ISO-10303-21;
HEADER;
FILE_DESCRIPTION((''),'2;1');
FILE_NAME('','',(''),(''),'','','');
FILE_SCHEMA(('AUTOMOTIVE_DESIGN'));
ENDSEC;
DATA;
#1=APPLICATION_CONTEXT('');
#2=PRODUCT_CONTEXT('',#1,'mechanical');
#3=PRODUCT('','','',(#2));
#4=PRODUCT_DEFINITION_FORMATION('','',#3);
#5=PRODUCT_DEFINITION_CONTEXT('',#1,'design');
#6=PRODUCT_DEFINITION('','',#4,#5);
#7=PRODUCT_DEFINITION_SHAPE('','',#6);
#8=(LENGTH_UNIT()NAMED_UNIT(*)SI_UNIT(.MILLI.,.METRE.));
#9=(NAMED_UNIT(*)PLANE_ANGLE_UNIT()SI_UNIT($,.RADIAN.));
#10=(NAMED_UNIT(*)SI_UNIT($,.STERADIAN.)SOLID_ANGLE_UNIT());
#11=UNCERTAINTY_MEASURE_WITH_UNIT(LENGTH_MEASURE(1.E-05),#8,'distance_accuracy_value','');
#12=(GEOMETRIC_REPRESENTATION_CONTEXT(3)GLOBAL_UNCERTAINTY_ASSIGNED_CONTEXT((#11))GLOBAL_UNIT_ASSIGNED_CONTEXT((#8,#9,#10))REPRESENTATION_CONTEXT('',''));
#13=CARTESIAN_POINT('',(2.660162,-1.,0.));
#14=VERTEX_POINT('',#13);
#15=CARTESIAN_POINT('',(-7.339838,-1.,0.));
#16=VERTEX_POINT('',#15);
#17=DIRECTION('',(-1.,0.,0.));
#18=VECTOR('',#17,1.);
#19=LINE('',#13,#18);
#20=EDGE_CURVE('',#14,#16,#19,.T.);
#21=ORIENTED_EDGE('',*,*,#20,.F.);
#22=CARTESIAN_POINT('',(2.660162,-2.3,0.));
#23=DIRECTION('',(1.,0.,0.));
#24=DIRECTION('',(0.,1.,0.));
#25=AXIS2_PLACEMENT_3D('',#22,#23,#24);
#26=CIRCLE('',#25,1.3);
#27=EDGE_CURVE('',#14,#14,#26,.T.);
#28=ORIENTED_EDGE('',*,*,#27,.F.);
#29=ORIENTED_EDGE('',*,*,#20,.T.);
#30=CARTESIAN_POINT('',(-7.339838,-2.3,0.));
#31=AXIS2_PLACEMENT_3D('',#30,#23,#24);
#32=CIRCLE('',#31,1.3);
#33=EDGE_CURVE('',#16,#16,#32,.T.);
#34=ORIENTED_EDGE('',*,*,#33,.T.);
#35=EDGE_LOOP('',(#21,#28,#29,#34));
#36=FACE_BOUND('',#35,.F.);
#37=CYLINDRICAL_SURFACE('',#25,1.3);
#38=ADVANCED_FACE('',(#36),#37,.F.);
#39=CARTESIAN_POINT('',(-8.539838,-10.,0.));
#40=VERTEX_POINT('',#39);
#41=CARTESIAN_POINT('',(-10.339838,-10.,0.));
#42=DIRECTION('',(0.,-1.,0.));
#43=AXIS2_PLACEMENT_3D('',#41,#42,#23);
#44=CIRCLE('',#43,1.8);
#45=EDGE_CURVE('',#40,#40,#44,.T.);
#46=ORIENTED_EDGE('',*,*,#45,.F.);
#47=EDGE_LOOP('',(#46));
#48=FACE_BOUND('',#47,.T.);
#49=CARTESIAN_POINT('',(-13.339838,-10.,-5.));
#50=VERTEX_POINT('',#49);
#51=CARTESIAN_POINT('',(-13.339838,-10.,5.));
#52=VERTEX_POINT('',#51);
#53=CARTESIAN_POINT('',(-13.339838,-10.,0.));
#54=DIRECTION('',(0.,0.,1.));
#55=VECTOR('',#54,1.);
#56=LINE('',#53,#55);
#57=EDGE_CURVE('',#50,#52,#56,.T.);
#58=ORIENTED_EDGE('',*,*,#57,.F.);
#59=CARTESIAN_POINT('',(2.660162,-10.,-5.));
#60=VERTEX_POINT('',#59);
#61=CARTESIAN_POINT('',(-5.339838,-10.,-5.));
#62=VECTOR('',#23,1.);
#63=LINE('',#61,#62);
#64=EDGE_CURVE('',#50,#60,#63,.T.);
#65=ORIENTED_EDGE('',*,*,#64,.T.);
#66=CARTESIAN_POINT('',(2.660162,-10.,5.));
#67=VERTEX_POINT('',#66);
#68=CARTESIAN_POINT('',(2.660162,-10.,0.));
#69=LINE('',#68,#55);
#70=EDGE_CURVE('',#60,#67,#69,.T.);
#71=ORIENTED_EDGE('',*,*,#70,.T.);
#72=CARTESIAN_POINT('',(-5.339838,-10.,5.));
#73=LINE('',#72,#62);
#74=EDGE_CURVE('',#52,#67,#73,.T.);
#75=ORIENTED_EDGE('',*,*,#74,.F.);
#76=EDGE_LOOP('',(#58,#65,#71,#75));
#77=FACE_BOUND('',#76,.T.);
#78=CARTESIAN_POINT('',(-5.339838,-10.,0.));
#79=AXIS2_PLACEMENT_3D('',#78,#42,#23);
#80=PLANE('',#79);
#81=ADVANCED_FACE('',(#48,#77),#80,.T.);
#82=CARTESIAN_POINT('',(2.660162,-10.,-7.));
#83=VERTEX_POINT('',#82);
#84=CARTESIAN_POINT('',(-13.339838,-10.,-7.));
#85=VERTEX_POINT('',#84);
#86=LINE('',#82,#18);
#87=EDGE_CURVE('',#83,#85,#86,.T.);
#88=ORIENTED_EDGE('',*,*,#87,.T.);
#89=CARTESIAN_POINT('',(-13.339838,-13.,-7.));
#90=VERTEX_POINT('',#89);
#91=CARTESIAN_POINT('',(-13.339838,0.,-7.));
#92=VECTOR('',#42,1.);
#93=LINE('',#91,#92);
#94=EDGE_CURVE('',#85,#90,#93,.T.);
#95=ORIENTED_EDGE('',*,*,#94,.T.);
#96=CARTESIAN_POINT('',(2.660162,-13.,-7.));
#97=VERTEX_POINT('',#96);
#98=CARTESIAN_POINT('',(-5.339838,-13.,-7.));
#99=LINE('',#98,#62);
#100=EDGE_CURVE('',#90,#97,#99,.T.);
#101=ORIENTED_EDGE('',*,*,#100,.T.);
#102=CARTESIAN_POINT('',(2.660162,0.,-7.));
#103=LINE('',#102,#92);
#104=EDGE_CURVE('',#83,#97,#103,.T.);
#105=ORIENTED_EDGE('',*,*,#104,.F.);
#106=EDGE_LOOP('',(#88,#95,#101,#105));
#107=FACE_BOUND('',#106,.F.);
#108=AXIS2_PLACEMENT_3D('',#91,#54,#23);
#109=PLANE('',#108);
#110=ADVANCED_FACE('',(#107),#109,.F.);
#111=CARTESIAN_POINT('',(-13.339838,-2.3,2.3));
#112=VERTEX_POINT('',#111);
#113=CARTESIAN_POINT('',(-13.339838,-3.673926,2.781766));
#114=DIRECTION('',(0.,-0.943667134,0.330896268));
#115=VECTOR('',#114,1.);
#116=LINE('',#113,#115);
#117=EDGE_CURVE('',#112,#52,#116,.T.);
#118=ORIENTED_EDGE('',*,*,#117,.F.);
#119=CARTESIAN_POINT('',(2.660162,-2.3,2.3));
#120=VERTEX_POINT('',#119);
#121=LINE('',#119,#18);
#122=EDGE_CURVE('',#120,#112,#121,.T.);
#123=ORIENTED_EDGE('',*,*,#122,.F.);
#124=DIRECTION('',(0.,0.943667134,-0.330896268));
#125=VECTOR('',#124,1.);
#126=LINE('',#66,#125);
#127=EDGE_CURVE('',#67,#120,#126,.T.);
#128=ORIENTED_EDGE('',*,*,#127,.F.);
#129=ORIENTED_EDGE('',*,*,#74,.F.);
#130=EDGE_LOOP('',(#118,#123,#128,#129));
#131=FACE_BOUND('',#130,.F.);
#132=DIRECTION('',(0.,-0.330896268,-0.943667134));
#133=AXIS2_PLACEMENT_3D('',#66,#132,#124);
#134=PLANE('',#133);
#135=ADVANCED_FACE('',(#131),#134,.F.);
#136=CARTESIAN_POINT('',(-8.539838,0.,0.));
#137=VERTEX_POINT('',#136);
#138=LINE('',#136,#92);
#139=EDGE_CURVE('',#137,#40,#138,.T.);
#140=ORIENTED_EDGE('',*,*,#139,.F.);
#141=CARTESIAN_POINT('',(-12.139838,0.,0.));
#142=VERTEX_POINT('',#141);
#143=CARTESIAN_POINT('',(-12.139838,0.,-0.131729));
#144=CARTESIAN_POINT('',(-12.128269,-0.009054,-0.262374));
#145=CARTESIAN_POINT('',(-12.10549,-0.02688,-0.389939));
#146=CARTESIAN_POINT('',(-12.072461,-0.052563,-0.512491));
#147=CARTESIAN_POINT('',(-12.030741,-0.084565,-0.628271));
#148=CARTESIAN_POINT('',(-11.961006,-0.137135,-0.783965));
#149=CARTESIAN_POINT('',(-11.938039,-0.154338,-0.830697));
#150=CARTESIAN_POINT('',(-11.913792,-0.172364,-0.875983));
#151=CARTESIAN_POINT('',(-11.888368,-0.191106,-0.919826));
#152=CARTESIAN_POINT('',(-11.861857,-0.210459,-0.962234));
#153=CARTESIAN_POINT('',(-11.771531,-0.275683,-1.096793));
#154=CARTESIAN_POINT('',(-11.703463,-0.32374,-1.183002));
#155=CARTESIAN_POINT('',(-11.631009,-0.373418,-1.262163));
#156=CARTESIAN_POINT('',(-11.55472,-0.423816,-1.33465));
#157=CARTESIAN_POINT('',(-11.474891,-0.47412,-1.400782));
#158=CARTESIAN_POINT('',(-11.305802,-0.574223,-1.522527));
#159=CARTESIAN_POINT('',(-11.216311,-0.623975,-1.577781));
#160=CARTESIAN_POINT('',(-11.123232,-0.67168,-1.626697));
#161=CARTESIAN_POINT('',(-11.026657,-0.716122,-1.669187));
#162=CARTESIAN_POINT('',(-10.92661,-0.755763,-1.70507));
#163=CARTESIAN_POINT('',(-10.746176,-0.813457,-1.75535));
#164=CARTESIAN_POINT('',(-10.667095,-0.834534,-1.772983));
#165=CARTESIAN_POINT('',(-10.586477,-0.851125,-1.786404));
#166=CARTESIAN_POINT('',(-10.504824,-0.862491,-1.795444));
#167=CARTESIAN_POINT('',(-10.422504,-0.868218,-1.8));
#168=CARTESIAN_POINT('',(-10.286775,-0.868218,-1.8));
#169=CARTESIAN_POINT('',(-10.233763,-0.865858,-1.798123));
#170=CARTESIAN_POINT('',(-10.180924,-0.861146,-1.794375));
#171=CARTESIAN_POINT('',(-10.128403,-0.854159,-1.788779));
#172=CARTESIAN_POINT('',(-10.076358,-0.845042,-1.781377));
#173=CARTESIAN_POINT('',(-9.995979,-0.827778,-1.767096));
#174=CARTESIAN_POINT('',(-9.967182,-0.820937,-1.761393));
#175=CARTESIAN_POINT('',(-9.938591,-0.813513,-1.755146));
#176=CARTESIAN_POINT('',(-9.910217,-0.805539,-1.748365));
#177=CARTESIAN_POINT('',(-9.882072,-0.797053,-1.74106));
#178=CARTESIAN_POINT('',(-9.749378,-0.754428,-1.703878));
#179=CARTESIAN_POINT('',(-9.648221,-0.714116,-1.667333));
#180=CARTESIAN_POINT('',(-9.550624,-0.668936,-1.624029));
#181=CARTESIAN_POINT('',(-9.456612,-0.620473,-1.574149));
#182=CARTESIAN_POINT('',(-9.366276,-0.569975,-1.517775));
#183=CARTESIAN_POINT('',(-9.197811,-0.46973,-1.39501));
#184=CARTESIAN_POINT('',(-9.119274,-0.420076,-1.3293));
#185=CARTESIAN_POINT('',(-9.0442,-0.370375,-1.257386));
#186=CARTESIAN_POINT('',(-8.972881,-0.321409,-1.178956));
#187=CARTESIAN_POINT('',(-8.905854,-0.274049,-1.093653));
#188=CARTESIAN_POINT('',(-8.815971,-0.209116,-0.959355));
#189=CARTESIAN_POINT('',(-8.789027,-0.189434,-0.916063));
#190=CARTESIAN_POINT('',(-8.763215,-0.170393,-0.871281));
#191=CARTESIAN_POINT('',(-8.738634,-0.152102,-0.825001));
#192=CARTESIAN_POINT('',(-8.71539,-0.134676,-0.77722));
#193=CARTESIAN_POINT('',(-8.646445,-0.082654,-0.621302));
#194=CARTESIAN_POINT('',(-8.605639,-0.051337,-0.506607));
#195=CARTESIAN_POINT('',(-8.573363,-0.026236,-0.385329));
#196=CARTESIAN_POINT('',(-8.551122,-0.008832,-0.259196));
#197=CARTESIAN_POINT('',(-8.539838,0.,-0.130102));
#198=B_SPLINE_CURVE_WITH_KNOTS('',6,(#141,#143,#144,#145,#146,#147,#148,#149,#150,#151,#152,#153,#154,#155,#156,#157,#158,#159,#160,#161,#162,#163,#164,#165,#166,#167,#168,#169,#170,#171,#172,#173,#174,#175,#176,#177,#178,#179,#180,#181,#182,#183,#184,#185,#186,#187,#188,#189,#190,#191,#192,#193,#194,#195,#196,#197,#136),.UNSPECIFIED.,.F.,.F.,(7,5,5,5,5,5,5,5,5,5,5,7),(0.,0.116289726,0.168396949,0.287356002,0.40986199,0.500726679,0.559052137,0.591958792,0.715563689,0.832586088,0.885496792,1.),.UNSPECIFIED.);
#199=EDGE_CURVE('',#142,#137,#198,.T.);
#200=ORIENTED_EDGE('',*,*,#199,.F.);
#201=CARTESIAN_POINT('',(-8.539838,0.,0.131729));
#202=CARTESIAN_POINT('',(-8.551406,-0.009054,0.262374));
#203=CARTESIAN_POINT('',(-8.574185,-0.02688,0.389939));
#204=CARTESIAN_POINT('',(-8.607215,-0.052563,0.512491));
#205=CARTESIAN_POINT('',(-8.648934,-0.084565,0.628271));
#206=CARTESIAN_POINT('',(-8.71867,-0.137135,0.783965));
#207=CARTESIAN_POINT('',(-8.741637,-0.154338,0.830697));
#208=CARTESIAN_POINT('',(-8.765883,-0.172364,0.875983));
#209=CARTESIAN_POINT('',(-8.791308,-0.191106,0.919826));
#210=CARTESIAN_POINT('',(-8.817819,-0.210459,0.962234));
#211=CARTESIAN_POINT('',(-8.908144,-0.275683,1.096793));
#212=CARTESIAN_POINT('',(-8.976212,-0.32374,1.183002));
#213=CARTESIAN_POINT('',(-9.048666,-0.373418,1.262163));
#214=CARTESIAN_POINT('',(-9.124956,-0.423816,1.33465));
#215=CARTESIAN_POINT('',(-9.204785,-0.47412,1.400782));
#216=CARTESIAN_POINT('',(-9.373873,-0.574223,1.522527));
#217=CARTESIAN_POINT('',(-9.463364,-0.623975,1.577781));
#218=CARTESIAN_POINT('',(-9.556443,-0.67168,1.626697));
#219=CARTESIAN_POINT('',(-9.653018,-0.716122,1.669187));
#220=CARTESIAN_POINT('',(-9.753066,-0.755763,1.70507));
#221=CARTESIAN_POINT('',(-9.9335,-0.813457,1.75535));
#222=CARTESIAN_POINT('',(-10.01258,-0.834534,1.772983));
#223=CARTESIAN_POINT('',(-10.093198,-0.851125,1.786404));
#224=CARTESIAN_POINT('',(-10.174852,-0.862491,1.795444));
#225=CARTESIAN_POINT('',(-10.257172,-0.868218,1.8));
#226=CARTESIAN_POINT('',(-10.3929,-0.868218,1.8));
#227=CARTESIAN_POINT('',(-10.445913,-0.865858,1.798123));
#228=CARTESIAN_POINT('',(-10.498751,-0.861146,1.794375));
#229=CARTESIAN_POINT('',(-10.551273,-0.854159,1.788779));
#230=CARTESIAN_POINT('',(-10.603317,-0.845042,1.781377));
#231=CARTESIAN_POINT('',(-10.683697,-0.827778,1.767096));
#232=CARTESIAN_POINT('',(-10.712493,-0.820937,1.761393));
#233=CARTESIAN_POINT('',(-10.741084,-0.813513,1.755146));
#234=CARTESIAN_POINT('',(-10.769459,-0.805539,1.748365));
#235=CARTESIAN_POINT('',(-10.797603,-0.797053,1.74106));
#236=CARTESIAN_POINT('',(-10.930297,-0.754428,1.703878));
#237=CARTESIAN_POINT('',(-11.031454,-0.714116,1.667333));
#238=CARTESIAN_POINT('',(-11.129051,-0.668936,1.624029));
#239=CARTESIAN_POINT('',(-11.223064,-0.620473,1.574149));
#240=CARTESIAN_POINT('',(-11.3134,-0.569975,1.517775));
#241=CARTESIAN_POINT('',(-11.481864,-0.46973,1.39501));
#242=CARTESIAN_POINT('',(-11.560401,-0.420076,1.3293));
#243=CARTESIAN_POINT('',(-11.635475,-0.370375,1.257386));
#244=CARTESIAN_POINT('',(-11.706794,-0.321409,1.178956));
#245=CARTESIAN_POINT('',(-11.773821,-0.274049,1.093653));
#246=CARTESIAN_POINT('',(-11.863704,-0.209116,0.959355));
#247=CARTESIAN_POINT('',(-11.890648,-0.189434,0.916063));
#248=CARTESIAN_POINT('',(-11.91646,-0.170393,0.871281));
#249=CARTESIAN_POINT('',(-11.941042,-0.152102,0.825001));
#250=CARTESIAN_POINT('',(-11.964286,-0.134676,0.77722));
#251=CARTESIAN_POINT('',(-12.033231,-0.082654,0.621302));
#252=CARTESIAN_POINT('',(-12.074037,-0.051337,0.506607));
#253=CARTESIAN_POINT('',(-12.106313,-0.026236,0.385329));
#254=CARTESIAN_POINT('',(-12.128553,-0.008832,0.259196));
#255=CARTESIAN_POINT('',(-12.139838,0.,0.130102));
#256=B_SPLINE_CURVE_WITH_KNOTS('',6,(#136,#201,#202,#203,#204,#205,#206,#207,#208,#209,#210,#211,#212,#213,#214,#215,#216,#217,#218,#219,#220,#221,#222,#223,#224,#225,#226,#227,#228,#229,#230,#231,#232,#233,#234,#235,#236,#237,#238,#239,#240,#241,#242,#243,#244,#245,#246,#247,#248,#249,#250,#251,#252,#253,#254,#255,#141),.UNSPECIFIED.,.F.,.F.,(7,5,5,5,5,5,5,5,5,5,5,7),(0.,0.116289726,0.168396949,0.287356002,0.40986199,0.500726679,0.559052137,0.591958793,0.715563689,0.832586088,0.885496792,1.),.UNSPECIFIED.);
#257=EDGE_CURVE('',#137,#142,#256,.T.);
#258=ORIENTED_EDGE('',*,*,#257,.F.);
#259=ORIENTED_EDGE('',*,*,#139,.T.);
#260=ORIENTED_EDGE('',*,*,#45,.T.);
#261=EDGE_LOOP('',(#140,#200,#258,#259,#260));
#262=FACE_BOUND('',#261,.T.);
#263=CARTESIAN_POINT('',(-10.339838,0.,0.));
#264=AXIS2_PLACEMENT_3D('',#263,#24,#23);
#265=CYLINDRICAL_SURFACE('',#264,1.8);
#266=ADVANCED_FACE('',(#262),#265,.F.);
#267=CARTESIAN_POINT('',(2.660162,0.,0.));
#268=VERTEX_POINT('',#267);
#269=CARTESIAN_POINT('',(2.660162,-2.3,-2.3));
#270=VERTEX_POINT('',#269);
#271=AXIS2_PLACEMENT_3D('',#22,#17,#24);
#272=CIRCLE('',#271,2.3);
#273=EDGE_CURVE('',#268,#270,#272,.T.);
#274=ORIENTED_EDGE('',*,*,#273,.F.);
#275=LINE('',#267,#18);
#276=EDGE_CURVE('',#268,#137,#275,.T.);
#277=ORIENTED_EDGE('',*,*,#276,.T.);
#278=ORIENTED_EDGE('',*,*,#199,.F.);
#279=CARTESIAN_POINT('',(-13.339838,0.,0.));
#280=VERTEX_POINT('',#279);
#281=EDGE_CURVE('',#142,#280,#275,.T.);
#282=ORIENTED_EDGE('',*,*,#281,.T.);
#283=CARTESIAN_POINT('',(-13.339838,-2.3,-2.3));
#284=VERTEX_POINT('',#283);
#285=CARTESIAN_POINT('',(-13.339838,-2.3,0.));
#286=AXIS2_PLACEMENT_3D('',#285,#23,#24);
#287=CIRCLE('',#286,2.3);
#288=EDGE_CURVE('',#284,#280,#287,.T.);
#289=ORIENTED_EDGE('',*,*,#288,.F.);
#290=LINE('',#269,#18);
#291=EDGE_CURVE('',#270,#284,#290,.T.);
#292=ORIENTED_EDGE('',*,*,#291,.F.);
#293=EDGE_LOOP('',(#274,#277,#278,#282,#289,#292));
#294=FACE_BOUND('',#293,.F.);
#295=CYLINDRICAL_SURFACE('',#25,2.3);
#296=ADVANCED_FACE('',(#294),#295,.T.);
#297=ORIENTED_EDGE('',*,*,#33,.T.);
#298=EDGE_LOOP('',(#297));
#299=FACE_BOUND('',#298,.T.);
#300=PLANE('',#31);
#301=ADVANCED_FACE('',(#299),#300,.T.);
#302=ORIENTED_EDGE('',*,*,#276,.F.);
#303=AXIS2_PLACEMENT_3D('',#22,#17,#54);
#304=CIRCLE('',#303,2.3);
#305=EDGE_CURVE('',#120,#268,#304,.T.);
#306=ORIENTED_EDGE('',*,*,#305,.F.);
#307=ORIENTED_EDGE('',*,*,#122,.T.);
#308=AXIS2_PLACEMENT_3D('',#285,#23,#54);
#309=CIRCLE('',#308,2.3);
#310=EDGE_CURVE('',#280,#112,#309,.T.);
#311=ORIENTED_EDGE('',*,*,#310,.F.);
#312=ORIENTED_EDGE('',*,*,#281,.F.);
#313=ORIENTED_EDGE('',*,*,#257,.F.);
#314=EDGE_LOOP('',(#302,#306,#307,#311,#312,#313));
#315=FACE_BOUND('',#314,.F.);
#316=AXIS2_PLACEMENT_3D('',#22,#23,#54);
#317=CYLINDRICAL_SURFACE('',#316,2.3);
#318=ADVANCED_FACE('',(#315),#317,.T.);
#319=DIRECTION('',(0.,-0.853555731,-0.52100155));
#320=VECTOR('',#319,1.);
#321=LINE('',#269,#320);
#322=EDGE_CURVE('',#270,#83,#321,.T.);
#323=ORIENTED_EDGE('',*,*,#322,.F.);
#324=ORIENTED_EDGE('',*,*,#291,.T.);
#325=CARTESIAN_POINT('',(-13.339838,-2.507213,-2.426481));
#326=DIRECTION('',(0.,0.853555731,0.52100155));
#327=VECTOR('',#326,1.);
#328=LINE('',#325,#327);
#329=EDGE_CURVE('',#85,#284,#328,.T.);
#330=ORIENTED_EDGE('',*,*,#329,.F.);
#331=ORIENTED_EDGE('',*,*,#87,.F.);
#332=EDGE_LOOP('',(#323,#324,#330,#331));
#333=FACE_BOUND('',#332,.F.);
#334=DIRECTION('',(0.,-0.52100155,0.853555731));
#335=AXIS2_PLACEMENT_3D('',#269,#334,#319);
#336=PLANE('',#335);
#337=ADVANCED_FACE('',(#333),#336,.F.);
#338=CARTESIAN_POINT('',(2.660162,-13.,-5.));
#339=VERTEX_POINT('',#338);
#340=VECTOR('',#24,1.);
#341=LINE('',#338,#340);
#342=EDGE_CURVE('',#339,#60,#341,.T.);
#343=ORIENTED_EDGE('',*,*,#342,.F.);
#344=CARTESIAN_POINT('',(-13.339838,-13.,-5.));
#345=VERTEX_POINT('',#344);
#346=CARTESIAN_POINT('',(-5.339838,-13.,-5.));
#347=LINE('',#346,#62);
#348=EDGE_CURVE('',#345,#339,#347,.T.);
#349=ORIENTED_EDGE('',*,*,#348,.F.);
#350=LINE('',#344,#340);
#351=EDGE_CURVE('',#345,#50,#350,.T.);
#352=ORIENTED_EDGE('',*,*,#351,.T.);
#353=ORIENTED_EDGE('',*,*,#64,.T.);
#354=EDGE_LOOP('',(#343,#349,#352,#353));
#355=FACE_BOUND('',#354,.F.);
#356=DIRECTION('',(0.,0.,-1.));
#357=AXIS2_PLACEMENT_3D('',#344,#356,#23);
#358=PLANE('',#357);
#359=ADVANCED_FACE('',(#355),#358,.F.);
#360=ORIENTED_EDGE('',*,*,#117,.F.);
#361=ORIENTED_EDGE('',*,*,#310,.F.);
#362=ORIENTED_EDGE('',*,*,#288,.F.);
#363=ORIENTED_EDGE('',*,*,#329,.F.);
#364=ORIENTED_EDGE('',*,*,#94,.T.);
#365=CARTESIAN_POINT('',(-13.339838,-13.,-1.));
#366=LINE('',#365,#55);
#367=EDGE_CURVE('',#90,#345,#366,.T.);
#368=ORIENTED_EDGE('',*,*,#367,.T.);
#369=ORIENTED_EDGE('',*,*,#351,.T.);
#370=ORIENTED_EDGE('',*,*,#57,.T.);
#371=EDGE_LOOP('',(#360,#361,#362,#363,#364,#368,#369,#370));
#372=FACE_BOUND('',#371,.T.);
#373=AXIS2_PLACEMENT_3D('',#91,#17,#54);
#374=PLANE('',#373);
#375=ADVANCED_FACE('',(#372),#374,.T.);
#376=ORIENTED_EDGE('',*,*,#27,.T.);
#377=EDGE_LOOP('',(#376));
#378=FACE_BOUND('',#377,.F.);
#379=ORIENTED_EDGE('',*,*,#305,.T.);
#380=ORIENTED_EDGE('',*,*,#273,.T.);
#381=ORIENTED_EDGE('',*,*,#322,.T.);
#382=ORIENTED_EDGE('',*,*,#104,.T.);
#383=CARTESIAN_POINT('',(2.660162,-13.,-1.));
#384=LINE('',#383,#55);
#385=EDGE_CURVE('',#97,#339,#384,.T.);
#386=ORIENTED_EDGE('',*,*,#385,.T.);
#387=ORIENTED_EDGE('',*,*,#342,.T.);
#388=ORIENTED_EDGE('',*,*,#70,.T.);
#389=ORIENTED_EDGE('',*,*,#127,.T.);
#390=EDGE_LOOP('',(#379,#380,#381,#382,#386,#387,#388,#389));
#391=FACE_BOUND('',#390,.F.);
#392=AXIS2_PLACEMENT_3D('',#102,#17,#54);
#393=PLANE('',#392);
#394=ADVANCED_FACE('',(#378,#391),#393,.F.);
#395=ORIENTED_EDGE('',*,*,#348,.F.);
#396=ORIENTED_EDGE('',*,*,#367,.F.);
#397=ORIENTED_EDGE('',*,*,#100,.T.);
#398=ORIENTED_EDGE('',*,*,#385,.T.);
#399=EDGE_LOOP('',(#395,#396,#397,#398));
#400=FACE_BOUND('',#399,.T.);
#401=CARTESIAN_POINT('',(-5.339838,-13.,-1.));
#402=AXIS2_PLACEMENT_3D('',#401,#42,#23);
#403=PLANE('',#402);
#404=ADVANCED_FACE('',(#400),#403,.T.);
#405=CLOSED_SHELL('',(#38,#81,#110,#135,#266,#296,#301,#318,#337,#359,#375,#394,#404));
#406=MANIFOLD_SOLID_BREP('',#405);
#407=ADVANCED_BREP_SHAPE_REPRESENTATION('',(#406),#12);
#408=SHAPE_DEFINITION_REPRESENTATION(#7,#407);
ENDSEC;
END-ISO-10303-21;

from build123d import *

# Parameters (mm, degrees)
F0_W     = 16
F0_H     = 12
F0_R     = 1.8
F1_DEPTH = 13
F2_W     = 16
F2_H     = 10
F2_R     = 1.8
F3_DEPTH = 3
F5_DEPTH = 16.001
F6_R     = 1.3
F7_DEPTH = 10


# Not quite as in the source:
# - a feature names something its author has since deleted; it is built from what else it names


with BuildPart() as f1:
    # F0 (on Front) → F1 (new body)
    with BuildSketch(Plane.XZ):
        with Locations((-5.3398377105, -1)):
            Rectangle(F0_W, F0_H)
        with Locations((-10.3398377105, 0)):
            Circle(F0_R, mode=Mode.SUBTRACT)
    extrude(amount=F1_DEPTH)

    # F2 (on face) → F3 (cut)
    with BuildSketch(Plane.XZ.offset(13)):
        with Locations((-5.3398377105, 0)):
            Rectangle(F2_W, F2_H)
        with Locations((-10.3398377105, 0)):
            Circle(F2_R, mode=Mode.SUBTRACT)
    extrude(amount=-F3_DEPTH, mode=Mode.SUBTRACT)

    # F4 (on face) → F5 (cut, through all)
    with BuildSketch(Plane.YZ.offset(2.6601622895)):
        with BuildLine():
            ThreePointArc((-2.3, 2.3), (-0.6736544033, 1.6263455967), (0, 0))
            Line((0, 0), (0, 5))
            Line((0, 5), (-10, 5))
            Line((-10, 5), (-2.3, 2.3))
        make_face()
        with BuildLine():
            Line((0, -7), (0, 0))
            ThreePointArc((0, 0), (-0.6736544033, -1.6263455967), (-2.3, -2.3))
            Line((-2.3, -2.3), (-10, -7))
            Line((-10, -7), (0, -7))
        make_face()
    extrude(amount=-F5_DEPTH, mode=Mode.SUBTRACT)

    # F6 (on face) → F7 (cut)
    with BuildSketch(Plane.YZ.offset(2.6601622895)):
        with Locations((-2.3, 0)):
            Circle(F6_R)
    extrude(amount=-F7_DEPTH, mode=Mode.SUBTRACT)


solid = f1.part
